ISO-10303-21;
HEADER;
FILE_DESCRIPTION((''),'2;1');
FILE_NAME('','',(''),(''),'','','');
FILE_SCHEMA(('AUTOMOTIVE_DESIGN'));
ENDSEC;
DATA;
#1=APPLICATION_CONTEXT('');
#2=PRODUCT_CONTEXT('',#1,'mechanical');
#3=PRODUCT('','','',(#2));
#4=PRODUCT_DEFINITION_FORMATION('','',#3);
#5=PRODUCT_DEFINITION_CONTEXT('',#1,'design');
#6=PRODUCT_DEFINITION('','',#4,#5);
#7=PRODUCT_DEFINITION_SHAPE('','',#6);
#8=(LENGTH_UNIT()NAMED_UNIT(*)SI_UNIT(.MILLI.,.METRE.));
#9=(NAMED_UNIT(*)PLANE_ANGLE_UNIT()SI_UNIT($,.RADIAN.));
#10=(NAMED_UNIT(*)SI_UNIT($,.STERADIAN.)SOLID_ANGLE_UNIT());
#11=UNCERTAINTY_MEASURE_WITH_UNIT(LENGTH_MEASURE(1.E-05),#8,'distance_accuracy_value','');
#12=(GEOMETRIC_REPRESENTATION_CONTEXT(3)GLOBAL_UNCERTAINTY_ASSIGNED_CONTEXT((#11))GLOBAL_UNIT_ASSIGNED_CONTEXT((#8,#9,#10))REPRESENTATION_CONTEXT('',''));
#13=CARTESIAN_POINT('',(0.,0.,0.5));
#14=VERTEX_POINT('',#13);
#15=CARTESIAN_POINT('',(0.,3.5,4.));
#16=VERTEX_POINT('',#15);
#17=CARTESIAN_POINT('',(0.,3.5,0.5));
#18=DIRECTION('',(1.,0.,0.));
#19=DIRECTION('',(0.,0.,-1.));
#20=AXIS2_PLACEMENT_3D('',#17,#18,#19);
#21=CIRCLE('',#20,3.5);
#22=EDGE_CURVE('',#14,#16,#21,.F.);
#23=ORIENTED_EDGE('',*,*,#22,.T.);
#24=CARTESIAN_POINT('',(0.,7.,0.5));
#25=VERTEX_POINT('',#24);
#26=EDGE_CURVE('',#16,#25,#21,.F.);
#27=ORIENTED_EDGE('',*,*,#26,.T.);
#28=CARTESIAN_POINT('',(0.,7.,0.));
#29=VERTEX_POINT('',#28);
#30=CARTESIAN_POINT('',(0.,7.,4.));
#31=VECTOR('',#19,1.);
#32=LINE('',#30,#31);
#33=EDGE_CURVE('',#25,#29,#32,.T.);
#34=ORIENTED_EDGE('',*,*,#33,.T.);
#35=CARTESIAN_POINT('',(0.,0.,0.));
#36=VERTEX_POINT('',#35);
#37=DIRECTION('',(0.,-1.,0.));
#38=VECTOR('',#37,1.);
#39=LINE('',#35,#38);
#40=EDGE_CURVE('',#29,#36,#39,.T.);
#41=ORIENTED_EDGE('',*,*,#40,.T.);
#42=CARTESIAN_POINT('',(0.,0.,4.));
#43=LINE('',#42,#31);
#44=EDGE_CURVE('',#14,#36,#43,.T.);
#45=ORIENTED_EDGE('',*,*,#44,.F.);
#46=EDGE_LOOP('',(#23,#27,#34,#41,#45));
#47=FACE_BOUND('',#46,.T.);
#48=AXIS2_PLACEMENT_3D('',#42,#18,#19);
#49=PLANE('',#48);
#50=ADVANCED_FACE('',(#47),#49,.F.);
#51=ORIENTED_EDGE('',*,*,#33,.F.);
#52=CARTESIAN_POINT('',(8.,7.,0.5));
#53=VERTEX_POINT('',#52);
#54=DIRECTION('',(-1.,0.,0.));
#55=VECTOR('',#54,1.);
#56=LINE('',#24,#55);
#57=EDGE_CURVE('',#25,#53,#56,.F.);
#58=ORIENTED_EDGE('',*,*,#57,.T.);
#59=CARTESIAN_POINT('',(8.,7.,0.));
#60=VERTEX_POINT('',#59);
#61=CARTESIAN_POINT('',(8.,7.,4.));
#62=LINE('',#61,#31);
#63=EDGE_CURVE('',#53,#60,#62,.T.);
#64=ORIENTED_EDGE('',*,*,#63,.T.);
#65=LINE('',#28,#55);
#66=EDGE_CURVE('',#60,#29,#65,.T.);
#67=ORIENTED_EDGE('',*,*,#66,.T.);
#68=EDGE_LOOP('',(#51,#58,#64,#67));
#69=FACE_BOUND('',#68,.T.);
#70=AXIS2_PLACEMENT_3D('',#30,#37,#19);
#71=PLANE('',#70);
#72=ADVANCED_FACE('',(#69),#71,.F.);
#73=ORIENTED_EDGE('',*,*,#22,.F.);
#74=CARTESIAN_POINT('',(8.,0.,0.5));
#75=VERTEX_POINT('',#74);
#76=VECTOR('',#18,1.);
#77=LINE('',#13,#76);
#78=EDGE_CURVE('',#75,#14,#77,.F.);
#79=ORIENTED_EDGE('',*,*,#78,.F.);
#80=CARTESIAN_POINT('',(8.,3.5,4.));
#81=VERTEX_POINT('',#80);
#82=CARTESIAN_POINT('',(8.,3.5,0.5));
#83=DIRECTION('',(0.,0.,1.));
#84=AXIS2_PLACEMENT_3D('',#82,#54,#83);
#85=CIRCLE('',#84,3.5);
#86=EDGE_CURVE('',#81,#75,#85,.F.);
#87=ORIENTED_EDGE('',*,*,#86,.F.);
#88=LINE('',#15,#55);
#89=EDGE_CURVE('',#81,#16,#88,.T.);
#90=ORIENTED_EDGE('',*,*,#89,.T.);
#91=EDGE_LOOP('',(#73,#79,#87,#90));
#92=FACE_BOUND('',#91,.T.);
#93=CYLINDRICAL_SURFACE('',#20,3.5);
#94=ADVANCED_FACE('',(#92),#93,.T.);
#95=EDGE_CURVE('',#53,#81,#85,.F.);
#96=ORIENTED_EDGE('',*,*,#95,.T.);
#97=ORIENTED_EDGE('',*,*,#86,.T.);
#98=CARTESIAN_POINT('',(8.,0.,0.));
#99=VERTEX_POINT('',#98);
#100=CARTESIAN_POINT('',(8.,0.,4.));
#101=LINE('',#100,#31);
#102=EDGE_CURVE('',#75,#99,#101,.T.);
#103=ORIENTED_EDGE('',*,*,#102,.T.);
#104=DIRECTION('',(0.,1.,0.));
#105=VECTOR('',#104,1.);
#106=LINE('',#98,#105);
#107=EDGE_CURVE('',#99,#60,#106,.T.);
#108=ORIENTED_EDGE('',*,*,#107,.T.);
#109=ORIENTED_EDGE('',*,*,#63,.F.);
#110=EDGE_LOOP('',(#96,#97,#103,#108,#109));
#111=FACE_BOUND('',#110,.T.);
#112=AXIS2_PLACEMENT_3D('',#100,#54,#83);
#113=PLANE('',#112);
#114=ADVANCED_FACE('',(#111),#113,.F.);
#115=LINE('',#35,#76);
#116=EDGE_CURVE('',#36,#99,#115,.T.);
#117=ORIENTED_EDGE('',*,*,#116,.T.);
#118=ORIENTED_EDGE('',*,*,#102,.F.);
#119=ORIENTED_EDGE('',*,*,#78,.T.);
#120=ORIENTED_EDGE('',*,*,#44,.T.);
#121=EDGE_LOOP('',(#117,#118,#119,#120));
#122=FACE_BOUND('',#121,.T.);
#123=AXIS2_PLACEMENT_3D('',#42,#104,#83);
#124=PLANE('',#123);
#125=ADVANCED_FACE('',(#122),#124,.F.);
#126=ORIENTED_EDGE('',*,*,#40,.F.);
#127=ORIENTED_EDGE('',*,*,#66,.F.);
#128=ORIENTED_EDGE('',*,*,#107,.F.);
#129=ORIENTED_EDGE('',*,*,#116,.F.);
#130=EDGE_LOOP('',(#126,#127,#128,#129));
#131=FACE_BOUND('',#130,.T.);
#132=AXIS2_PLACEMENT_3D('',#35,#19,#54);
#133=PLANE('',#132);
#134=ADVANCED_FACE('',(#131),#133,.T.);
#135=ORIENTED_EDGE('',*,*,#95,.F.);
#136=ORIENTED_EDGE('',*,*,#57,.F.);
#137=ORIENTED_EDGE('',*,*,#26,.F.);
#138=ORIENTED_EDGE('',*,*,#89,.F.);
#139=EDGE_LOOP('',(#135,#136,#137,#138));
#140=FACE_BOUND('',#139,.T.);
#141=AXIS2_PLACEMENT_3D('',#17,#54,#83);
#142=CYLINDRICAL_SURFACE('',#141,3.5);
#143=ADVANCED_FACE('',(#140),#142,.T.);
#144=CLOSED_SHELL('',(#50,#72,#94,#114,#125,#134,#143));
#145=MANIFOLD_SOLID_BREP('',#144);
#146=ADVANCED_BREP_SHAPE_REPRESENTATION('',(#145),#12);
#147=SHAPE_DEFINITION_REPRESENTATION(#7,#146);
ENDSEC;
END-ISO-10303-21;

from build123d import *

# Parameters (mm, degrees)
SKETCH1_W           = 8
SKETCH1_H           = 7
BOSS_EXTRUDE1_DEPTH = 4
FILLET1_R           = 3.5


with BuildPart() as part:
    # Sketch1 → Boss-Extrude1 (new body)
    with BuildSketch(Plane.XY):
        with Locations((4, 3.5)):
            Rectangle(SKETCH1_W, SKETCH1_H)
    extrude(amount=BOSS_EXTRUDE1_DEPTH)

    # Fillet1
    fillet1_edges = [part.edges().sort_by_distance(p)[0] for p in [
        (4, 0, 4),
        (4, 7, 4),
    ]]
    fillet(fillet1_edges, radius=FILLET1_R - 0.0001)  # a hair under: the kernel refuses the full size


solid = part.part
